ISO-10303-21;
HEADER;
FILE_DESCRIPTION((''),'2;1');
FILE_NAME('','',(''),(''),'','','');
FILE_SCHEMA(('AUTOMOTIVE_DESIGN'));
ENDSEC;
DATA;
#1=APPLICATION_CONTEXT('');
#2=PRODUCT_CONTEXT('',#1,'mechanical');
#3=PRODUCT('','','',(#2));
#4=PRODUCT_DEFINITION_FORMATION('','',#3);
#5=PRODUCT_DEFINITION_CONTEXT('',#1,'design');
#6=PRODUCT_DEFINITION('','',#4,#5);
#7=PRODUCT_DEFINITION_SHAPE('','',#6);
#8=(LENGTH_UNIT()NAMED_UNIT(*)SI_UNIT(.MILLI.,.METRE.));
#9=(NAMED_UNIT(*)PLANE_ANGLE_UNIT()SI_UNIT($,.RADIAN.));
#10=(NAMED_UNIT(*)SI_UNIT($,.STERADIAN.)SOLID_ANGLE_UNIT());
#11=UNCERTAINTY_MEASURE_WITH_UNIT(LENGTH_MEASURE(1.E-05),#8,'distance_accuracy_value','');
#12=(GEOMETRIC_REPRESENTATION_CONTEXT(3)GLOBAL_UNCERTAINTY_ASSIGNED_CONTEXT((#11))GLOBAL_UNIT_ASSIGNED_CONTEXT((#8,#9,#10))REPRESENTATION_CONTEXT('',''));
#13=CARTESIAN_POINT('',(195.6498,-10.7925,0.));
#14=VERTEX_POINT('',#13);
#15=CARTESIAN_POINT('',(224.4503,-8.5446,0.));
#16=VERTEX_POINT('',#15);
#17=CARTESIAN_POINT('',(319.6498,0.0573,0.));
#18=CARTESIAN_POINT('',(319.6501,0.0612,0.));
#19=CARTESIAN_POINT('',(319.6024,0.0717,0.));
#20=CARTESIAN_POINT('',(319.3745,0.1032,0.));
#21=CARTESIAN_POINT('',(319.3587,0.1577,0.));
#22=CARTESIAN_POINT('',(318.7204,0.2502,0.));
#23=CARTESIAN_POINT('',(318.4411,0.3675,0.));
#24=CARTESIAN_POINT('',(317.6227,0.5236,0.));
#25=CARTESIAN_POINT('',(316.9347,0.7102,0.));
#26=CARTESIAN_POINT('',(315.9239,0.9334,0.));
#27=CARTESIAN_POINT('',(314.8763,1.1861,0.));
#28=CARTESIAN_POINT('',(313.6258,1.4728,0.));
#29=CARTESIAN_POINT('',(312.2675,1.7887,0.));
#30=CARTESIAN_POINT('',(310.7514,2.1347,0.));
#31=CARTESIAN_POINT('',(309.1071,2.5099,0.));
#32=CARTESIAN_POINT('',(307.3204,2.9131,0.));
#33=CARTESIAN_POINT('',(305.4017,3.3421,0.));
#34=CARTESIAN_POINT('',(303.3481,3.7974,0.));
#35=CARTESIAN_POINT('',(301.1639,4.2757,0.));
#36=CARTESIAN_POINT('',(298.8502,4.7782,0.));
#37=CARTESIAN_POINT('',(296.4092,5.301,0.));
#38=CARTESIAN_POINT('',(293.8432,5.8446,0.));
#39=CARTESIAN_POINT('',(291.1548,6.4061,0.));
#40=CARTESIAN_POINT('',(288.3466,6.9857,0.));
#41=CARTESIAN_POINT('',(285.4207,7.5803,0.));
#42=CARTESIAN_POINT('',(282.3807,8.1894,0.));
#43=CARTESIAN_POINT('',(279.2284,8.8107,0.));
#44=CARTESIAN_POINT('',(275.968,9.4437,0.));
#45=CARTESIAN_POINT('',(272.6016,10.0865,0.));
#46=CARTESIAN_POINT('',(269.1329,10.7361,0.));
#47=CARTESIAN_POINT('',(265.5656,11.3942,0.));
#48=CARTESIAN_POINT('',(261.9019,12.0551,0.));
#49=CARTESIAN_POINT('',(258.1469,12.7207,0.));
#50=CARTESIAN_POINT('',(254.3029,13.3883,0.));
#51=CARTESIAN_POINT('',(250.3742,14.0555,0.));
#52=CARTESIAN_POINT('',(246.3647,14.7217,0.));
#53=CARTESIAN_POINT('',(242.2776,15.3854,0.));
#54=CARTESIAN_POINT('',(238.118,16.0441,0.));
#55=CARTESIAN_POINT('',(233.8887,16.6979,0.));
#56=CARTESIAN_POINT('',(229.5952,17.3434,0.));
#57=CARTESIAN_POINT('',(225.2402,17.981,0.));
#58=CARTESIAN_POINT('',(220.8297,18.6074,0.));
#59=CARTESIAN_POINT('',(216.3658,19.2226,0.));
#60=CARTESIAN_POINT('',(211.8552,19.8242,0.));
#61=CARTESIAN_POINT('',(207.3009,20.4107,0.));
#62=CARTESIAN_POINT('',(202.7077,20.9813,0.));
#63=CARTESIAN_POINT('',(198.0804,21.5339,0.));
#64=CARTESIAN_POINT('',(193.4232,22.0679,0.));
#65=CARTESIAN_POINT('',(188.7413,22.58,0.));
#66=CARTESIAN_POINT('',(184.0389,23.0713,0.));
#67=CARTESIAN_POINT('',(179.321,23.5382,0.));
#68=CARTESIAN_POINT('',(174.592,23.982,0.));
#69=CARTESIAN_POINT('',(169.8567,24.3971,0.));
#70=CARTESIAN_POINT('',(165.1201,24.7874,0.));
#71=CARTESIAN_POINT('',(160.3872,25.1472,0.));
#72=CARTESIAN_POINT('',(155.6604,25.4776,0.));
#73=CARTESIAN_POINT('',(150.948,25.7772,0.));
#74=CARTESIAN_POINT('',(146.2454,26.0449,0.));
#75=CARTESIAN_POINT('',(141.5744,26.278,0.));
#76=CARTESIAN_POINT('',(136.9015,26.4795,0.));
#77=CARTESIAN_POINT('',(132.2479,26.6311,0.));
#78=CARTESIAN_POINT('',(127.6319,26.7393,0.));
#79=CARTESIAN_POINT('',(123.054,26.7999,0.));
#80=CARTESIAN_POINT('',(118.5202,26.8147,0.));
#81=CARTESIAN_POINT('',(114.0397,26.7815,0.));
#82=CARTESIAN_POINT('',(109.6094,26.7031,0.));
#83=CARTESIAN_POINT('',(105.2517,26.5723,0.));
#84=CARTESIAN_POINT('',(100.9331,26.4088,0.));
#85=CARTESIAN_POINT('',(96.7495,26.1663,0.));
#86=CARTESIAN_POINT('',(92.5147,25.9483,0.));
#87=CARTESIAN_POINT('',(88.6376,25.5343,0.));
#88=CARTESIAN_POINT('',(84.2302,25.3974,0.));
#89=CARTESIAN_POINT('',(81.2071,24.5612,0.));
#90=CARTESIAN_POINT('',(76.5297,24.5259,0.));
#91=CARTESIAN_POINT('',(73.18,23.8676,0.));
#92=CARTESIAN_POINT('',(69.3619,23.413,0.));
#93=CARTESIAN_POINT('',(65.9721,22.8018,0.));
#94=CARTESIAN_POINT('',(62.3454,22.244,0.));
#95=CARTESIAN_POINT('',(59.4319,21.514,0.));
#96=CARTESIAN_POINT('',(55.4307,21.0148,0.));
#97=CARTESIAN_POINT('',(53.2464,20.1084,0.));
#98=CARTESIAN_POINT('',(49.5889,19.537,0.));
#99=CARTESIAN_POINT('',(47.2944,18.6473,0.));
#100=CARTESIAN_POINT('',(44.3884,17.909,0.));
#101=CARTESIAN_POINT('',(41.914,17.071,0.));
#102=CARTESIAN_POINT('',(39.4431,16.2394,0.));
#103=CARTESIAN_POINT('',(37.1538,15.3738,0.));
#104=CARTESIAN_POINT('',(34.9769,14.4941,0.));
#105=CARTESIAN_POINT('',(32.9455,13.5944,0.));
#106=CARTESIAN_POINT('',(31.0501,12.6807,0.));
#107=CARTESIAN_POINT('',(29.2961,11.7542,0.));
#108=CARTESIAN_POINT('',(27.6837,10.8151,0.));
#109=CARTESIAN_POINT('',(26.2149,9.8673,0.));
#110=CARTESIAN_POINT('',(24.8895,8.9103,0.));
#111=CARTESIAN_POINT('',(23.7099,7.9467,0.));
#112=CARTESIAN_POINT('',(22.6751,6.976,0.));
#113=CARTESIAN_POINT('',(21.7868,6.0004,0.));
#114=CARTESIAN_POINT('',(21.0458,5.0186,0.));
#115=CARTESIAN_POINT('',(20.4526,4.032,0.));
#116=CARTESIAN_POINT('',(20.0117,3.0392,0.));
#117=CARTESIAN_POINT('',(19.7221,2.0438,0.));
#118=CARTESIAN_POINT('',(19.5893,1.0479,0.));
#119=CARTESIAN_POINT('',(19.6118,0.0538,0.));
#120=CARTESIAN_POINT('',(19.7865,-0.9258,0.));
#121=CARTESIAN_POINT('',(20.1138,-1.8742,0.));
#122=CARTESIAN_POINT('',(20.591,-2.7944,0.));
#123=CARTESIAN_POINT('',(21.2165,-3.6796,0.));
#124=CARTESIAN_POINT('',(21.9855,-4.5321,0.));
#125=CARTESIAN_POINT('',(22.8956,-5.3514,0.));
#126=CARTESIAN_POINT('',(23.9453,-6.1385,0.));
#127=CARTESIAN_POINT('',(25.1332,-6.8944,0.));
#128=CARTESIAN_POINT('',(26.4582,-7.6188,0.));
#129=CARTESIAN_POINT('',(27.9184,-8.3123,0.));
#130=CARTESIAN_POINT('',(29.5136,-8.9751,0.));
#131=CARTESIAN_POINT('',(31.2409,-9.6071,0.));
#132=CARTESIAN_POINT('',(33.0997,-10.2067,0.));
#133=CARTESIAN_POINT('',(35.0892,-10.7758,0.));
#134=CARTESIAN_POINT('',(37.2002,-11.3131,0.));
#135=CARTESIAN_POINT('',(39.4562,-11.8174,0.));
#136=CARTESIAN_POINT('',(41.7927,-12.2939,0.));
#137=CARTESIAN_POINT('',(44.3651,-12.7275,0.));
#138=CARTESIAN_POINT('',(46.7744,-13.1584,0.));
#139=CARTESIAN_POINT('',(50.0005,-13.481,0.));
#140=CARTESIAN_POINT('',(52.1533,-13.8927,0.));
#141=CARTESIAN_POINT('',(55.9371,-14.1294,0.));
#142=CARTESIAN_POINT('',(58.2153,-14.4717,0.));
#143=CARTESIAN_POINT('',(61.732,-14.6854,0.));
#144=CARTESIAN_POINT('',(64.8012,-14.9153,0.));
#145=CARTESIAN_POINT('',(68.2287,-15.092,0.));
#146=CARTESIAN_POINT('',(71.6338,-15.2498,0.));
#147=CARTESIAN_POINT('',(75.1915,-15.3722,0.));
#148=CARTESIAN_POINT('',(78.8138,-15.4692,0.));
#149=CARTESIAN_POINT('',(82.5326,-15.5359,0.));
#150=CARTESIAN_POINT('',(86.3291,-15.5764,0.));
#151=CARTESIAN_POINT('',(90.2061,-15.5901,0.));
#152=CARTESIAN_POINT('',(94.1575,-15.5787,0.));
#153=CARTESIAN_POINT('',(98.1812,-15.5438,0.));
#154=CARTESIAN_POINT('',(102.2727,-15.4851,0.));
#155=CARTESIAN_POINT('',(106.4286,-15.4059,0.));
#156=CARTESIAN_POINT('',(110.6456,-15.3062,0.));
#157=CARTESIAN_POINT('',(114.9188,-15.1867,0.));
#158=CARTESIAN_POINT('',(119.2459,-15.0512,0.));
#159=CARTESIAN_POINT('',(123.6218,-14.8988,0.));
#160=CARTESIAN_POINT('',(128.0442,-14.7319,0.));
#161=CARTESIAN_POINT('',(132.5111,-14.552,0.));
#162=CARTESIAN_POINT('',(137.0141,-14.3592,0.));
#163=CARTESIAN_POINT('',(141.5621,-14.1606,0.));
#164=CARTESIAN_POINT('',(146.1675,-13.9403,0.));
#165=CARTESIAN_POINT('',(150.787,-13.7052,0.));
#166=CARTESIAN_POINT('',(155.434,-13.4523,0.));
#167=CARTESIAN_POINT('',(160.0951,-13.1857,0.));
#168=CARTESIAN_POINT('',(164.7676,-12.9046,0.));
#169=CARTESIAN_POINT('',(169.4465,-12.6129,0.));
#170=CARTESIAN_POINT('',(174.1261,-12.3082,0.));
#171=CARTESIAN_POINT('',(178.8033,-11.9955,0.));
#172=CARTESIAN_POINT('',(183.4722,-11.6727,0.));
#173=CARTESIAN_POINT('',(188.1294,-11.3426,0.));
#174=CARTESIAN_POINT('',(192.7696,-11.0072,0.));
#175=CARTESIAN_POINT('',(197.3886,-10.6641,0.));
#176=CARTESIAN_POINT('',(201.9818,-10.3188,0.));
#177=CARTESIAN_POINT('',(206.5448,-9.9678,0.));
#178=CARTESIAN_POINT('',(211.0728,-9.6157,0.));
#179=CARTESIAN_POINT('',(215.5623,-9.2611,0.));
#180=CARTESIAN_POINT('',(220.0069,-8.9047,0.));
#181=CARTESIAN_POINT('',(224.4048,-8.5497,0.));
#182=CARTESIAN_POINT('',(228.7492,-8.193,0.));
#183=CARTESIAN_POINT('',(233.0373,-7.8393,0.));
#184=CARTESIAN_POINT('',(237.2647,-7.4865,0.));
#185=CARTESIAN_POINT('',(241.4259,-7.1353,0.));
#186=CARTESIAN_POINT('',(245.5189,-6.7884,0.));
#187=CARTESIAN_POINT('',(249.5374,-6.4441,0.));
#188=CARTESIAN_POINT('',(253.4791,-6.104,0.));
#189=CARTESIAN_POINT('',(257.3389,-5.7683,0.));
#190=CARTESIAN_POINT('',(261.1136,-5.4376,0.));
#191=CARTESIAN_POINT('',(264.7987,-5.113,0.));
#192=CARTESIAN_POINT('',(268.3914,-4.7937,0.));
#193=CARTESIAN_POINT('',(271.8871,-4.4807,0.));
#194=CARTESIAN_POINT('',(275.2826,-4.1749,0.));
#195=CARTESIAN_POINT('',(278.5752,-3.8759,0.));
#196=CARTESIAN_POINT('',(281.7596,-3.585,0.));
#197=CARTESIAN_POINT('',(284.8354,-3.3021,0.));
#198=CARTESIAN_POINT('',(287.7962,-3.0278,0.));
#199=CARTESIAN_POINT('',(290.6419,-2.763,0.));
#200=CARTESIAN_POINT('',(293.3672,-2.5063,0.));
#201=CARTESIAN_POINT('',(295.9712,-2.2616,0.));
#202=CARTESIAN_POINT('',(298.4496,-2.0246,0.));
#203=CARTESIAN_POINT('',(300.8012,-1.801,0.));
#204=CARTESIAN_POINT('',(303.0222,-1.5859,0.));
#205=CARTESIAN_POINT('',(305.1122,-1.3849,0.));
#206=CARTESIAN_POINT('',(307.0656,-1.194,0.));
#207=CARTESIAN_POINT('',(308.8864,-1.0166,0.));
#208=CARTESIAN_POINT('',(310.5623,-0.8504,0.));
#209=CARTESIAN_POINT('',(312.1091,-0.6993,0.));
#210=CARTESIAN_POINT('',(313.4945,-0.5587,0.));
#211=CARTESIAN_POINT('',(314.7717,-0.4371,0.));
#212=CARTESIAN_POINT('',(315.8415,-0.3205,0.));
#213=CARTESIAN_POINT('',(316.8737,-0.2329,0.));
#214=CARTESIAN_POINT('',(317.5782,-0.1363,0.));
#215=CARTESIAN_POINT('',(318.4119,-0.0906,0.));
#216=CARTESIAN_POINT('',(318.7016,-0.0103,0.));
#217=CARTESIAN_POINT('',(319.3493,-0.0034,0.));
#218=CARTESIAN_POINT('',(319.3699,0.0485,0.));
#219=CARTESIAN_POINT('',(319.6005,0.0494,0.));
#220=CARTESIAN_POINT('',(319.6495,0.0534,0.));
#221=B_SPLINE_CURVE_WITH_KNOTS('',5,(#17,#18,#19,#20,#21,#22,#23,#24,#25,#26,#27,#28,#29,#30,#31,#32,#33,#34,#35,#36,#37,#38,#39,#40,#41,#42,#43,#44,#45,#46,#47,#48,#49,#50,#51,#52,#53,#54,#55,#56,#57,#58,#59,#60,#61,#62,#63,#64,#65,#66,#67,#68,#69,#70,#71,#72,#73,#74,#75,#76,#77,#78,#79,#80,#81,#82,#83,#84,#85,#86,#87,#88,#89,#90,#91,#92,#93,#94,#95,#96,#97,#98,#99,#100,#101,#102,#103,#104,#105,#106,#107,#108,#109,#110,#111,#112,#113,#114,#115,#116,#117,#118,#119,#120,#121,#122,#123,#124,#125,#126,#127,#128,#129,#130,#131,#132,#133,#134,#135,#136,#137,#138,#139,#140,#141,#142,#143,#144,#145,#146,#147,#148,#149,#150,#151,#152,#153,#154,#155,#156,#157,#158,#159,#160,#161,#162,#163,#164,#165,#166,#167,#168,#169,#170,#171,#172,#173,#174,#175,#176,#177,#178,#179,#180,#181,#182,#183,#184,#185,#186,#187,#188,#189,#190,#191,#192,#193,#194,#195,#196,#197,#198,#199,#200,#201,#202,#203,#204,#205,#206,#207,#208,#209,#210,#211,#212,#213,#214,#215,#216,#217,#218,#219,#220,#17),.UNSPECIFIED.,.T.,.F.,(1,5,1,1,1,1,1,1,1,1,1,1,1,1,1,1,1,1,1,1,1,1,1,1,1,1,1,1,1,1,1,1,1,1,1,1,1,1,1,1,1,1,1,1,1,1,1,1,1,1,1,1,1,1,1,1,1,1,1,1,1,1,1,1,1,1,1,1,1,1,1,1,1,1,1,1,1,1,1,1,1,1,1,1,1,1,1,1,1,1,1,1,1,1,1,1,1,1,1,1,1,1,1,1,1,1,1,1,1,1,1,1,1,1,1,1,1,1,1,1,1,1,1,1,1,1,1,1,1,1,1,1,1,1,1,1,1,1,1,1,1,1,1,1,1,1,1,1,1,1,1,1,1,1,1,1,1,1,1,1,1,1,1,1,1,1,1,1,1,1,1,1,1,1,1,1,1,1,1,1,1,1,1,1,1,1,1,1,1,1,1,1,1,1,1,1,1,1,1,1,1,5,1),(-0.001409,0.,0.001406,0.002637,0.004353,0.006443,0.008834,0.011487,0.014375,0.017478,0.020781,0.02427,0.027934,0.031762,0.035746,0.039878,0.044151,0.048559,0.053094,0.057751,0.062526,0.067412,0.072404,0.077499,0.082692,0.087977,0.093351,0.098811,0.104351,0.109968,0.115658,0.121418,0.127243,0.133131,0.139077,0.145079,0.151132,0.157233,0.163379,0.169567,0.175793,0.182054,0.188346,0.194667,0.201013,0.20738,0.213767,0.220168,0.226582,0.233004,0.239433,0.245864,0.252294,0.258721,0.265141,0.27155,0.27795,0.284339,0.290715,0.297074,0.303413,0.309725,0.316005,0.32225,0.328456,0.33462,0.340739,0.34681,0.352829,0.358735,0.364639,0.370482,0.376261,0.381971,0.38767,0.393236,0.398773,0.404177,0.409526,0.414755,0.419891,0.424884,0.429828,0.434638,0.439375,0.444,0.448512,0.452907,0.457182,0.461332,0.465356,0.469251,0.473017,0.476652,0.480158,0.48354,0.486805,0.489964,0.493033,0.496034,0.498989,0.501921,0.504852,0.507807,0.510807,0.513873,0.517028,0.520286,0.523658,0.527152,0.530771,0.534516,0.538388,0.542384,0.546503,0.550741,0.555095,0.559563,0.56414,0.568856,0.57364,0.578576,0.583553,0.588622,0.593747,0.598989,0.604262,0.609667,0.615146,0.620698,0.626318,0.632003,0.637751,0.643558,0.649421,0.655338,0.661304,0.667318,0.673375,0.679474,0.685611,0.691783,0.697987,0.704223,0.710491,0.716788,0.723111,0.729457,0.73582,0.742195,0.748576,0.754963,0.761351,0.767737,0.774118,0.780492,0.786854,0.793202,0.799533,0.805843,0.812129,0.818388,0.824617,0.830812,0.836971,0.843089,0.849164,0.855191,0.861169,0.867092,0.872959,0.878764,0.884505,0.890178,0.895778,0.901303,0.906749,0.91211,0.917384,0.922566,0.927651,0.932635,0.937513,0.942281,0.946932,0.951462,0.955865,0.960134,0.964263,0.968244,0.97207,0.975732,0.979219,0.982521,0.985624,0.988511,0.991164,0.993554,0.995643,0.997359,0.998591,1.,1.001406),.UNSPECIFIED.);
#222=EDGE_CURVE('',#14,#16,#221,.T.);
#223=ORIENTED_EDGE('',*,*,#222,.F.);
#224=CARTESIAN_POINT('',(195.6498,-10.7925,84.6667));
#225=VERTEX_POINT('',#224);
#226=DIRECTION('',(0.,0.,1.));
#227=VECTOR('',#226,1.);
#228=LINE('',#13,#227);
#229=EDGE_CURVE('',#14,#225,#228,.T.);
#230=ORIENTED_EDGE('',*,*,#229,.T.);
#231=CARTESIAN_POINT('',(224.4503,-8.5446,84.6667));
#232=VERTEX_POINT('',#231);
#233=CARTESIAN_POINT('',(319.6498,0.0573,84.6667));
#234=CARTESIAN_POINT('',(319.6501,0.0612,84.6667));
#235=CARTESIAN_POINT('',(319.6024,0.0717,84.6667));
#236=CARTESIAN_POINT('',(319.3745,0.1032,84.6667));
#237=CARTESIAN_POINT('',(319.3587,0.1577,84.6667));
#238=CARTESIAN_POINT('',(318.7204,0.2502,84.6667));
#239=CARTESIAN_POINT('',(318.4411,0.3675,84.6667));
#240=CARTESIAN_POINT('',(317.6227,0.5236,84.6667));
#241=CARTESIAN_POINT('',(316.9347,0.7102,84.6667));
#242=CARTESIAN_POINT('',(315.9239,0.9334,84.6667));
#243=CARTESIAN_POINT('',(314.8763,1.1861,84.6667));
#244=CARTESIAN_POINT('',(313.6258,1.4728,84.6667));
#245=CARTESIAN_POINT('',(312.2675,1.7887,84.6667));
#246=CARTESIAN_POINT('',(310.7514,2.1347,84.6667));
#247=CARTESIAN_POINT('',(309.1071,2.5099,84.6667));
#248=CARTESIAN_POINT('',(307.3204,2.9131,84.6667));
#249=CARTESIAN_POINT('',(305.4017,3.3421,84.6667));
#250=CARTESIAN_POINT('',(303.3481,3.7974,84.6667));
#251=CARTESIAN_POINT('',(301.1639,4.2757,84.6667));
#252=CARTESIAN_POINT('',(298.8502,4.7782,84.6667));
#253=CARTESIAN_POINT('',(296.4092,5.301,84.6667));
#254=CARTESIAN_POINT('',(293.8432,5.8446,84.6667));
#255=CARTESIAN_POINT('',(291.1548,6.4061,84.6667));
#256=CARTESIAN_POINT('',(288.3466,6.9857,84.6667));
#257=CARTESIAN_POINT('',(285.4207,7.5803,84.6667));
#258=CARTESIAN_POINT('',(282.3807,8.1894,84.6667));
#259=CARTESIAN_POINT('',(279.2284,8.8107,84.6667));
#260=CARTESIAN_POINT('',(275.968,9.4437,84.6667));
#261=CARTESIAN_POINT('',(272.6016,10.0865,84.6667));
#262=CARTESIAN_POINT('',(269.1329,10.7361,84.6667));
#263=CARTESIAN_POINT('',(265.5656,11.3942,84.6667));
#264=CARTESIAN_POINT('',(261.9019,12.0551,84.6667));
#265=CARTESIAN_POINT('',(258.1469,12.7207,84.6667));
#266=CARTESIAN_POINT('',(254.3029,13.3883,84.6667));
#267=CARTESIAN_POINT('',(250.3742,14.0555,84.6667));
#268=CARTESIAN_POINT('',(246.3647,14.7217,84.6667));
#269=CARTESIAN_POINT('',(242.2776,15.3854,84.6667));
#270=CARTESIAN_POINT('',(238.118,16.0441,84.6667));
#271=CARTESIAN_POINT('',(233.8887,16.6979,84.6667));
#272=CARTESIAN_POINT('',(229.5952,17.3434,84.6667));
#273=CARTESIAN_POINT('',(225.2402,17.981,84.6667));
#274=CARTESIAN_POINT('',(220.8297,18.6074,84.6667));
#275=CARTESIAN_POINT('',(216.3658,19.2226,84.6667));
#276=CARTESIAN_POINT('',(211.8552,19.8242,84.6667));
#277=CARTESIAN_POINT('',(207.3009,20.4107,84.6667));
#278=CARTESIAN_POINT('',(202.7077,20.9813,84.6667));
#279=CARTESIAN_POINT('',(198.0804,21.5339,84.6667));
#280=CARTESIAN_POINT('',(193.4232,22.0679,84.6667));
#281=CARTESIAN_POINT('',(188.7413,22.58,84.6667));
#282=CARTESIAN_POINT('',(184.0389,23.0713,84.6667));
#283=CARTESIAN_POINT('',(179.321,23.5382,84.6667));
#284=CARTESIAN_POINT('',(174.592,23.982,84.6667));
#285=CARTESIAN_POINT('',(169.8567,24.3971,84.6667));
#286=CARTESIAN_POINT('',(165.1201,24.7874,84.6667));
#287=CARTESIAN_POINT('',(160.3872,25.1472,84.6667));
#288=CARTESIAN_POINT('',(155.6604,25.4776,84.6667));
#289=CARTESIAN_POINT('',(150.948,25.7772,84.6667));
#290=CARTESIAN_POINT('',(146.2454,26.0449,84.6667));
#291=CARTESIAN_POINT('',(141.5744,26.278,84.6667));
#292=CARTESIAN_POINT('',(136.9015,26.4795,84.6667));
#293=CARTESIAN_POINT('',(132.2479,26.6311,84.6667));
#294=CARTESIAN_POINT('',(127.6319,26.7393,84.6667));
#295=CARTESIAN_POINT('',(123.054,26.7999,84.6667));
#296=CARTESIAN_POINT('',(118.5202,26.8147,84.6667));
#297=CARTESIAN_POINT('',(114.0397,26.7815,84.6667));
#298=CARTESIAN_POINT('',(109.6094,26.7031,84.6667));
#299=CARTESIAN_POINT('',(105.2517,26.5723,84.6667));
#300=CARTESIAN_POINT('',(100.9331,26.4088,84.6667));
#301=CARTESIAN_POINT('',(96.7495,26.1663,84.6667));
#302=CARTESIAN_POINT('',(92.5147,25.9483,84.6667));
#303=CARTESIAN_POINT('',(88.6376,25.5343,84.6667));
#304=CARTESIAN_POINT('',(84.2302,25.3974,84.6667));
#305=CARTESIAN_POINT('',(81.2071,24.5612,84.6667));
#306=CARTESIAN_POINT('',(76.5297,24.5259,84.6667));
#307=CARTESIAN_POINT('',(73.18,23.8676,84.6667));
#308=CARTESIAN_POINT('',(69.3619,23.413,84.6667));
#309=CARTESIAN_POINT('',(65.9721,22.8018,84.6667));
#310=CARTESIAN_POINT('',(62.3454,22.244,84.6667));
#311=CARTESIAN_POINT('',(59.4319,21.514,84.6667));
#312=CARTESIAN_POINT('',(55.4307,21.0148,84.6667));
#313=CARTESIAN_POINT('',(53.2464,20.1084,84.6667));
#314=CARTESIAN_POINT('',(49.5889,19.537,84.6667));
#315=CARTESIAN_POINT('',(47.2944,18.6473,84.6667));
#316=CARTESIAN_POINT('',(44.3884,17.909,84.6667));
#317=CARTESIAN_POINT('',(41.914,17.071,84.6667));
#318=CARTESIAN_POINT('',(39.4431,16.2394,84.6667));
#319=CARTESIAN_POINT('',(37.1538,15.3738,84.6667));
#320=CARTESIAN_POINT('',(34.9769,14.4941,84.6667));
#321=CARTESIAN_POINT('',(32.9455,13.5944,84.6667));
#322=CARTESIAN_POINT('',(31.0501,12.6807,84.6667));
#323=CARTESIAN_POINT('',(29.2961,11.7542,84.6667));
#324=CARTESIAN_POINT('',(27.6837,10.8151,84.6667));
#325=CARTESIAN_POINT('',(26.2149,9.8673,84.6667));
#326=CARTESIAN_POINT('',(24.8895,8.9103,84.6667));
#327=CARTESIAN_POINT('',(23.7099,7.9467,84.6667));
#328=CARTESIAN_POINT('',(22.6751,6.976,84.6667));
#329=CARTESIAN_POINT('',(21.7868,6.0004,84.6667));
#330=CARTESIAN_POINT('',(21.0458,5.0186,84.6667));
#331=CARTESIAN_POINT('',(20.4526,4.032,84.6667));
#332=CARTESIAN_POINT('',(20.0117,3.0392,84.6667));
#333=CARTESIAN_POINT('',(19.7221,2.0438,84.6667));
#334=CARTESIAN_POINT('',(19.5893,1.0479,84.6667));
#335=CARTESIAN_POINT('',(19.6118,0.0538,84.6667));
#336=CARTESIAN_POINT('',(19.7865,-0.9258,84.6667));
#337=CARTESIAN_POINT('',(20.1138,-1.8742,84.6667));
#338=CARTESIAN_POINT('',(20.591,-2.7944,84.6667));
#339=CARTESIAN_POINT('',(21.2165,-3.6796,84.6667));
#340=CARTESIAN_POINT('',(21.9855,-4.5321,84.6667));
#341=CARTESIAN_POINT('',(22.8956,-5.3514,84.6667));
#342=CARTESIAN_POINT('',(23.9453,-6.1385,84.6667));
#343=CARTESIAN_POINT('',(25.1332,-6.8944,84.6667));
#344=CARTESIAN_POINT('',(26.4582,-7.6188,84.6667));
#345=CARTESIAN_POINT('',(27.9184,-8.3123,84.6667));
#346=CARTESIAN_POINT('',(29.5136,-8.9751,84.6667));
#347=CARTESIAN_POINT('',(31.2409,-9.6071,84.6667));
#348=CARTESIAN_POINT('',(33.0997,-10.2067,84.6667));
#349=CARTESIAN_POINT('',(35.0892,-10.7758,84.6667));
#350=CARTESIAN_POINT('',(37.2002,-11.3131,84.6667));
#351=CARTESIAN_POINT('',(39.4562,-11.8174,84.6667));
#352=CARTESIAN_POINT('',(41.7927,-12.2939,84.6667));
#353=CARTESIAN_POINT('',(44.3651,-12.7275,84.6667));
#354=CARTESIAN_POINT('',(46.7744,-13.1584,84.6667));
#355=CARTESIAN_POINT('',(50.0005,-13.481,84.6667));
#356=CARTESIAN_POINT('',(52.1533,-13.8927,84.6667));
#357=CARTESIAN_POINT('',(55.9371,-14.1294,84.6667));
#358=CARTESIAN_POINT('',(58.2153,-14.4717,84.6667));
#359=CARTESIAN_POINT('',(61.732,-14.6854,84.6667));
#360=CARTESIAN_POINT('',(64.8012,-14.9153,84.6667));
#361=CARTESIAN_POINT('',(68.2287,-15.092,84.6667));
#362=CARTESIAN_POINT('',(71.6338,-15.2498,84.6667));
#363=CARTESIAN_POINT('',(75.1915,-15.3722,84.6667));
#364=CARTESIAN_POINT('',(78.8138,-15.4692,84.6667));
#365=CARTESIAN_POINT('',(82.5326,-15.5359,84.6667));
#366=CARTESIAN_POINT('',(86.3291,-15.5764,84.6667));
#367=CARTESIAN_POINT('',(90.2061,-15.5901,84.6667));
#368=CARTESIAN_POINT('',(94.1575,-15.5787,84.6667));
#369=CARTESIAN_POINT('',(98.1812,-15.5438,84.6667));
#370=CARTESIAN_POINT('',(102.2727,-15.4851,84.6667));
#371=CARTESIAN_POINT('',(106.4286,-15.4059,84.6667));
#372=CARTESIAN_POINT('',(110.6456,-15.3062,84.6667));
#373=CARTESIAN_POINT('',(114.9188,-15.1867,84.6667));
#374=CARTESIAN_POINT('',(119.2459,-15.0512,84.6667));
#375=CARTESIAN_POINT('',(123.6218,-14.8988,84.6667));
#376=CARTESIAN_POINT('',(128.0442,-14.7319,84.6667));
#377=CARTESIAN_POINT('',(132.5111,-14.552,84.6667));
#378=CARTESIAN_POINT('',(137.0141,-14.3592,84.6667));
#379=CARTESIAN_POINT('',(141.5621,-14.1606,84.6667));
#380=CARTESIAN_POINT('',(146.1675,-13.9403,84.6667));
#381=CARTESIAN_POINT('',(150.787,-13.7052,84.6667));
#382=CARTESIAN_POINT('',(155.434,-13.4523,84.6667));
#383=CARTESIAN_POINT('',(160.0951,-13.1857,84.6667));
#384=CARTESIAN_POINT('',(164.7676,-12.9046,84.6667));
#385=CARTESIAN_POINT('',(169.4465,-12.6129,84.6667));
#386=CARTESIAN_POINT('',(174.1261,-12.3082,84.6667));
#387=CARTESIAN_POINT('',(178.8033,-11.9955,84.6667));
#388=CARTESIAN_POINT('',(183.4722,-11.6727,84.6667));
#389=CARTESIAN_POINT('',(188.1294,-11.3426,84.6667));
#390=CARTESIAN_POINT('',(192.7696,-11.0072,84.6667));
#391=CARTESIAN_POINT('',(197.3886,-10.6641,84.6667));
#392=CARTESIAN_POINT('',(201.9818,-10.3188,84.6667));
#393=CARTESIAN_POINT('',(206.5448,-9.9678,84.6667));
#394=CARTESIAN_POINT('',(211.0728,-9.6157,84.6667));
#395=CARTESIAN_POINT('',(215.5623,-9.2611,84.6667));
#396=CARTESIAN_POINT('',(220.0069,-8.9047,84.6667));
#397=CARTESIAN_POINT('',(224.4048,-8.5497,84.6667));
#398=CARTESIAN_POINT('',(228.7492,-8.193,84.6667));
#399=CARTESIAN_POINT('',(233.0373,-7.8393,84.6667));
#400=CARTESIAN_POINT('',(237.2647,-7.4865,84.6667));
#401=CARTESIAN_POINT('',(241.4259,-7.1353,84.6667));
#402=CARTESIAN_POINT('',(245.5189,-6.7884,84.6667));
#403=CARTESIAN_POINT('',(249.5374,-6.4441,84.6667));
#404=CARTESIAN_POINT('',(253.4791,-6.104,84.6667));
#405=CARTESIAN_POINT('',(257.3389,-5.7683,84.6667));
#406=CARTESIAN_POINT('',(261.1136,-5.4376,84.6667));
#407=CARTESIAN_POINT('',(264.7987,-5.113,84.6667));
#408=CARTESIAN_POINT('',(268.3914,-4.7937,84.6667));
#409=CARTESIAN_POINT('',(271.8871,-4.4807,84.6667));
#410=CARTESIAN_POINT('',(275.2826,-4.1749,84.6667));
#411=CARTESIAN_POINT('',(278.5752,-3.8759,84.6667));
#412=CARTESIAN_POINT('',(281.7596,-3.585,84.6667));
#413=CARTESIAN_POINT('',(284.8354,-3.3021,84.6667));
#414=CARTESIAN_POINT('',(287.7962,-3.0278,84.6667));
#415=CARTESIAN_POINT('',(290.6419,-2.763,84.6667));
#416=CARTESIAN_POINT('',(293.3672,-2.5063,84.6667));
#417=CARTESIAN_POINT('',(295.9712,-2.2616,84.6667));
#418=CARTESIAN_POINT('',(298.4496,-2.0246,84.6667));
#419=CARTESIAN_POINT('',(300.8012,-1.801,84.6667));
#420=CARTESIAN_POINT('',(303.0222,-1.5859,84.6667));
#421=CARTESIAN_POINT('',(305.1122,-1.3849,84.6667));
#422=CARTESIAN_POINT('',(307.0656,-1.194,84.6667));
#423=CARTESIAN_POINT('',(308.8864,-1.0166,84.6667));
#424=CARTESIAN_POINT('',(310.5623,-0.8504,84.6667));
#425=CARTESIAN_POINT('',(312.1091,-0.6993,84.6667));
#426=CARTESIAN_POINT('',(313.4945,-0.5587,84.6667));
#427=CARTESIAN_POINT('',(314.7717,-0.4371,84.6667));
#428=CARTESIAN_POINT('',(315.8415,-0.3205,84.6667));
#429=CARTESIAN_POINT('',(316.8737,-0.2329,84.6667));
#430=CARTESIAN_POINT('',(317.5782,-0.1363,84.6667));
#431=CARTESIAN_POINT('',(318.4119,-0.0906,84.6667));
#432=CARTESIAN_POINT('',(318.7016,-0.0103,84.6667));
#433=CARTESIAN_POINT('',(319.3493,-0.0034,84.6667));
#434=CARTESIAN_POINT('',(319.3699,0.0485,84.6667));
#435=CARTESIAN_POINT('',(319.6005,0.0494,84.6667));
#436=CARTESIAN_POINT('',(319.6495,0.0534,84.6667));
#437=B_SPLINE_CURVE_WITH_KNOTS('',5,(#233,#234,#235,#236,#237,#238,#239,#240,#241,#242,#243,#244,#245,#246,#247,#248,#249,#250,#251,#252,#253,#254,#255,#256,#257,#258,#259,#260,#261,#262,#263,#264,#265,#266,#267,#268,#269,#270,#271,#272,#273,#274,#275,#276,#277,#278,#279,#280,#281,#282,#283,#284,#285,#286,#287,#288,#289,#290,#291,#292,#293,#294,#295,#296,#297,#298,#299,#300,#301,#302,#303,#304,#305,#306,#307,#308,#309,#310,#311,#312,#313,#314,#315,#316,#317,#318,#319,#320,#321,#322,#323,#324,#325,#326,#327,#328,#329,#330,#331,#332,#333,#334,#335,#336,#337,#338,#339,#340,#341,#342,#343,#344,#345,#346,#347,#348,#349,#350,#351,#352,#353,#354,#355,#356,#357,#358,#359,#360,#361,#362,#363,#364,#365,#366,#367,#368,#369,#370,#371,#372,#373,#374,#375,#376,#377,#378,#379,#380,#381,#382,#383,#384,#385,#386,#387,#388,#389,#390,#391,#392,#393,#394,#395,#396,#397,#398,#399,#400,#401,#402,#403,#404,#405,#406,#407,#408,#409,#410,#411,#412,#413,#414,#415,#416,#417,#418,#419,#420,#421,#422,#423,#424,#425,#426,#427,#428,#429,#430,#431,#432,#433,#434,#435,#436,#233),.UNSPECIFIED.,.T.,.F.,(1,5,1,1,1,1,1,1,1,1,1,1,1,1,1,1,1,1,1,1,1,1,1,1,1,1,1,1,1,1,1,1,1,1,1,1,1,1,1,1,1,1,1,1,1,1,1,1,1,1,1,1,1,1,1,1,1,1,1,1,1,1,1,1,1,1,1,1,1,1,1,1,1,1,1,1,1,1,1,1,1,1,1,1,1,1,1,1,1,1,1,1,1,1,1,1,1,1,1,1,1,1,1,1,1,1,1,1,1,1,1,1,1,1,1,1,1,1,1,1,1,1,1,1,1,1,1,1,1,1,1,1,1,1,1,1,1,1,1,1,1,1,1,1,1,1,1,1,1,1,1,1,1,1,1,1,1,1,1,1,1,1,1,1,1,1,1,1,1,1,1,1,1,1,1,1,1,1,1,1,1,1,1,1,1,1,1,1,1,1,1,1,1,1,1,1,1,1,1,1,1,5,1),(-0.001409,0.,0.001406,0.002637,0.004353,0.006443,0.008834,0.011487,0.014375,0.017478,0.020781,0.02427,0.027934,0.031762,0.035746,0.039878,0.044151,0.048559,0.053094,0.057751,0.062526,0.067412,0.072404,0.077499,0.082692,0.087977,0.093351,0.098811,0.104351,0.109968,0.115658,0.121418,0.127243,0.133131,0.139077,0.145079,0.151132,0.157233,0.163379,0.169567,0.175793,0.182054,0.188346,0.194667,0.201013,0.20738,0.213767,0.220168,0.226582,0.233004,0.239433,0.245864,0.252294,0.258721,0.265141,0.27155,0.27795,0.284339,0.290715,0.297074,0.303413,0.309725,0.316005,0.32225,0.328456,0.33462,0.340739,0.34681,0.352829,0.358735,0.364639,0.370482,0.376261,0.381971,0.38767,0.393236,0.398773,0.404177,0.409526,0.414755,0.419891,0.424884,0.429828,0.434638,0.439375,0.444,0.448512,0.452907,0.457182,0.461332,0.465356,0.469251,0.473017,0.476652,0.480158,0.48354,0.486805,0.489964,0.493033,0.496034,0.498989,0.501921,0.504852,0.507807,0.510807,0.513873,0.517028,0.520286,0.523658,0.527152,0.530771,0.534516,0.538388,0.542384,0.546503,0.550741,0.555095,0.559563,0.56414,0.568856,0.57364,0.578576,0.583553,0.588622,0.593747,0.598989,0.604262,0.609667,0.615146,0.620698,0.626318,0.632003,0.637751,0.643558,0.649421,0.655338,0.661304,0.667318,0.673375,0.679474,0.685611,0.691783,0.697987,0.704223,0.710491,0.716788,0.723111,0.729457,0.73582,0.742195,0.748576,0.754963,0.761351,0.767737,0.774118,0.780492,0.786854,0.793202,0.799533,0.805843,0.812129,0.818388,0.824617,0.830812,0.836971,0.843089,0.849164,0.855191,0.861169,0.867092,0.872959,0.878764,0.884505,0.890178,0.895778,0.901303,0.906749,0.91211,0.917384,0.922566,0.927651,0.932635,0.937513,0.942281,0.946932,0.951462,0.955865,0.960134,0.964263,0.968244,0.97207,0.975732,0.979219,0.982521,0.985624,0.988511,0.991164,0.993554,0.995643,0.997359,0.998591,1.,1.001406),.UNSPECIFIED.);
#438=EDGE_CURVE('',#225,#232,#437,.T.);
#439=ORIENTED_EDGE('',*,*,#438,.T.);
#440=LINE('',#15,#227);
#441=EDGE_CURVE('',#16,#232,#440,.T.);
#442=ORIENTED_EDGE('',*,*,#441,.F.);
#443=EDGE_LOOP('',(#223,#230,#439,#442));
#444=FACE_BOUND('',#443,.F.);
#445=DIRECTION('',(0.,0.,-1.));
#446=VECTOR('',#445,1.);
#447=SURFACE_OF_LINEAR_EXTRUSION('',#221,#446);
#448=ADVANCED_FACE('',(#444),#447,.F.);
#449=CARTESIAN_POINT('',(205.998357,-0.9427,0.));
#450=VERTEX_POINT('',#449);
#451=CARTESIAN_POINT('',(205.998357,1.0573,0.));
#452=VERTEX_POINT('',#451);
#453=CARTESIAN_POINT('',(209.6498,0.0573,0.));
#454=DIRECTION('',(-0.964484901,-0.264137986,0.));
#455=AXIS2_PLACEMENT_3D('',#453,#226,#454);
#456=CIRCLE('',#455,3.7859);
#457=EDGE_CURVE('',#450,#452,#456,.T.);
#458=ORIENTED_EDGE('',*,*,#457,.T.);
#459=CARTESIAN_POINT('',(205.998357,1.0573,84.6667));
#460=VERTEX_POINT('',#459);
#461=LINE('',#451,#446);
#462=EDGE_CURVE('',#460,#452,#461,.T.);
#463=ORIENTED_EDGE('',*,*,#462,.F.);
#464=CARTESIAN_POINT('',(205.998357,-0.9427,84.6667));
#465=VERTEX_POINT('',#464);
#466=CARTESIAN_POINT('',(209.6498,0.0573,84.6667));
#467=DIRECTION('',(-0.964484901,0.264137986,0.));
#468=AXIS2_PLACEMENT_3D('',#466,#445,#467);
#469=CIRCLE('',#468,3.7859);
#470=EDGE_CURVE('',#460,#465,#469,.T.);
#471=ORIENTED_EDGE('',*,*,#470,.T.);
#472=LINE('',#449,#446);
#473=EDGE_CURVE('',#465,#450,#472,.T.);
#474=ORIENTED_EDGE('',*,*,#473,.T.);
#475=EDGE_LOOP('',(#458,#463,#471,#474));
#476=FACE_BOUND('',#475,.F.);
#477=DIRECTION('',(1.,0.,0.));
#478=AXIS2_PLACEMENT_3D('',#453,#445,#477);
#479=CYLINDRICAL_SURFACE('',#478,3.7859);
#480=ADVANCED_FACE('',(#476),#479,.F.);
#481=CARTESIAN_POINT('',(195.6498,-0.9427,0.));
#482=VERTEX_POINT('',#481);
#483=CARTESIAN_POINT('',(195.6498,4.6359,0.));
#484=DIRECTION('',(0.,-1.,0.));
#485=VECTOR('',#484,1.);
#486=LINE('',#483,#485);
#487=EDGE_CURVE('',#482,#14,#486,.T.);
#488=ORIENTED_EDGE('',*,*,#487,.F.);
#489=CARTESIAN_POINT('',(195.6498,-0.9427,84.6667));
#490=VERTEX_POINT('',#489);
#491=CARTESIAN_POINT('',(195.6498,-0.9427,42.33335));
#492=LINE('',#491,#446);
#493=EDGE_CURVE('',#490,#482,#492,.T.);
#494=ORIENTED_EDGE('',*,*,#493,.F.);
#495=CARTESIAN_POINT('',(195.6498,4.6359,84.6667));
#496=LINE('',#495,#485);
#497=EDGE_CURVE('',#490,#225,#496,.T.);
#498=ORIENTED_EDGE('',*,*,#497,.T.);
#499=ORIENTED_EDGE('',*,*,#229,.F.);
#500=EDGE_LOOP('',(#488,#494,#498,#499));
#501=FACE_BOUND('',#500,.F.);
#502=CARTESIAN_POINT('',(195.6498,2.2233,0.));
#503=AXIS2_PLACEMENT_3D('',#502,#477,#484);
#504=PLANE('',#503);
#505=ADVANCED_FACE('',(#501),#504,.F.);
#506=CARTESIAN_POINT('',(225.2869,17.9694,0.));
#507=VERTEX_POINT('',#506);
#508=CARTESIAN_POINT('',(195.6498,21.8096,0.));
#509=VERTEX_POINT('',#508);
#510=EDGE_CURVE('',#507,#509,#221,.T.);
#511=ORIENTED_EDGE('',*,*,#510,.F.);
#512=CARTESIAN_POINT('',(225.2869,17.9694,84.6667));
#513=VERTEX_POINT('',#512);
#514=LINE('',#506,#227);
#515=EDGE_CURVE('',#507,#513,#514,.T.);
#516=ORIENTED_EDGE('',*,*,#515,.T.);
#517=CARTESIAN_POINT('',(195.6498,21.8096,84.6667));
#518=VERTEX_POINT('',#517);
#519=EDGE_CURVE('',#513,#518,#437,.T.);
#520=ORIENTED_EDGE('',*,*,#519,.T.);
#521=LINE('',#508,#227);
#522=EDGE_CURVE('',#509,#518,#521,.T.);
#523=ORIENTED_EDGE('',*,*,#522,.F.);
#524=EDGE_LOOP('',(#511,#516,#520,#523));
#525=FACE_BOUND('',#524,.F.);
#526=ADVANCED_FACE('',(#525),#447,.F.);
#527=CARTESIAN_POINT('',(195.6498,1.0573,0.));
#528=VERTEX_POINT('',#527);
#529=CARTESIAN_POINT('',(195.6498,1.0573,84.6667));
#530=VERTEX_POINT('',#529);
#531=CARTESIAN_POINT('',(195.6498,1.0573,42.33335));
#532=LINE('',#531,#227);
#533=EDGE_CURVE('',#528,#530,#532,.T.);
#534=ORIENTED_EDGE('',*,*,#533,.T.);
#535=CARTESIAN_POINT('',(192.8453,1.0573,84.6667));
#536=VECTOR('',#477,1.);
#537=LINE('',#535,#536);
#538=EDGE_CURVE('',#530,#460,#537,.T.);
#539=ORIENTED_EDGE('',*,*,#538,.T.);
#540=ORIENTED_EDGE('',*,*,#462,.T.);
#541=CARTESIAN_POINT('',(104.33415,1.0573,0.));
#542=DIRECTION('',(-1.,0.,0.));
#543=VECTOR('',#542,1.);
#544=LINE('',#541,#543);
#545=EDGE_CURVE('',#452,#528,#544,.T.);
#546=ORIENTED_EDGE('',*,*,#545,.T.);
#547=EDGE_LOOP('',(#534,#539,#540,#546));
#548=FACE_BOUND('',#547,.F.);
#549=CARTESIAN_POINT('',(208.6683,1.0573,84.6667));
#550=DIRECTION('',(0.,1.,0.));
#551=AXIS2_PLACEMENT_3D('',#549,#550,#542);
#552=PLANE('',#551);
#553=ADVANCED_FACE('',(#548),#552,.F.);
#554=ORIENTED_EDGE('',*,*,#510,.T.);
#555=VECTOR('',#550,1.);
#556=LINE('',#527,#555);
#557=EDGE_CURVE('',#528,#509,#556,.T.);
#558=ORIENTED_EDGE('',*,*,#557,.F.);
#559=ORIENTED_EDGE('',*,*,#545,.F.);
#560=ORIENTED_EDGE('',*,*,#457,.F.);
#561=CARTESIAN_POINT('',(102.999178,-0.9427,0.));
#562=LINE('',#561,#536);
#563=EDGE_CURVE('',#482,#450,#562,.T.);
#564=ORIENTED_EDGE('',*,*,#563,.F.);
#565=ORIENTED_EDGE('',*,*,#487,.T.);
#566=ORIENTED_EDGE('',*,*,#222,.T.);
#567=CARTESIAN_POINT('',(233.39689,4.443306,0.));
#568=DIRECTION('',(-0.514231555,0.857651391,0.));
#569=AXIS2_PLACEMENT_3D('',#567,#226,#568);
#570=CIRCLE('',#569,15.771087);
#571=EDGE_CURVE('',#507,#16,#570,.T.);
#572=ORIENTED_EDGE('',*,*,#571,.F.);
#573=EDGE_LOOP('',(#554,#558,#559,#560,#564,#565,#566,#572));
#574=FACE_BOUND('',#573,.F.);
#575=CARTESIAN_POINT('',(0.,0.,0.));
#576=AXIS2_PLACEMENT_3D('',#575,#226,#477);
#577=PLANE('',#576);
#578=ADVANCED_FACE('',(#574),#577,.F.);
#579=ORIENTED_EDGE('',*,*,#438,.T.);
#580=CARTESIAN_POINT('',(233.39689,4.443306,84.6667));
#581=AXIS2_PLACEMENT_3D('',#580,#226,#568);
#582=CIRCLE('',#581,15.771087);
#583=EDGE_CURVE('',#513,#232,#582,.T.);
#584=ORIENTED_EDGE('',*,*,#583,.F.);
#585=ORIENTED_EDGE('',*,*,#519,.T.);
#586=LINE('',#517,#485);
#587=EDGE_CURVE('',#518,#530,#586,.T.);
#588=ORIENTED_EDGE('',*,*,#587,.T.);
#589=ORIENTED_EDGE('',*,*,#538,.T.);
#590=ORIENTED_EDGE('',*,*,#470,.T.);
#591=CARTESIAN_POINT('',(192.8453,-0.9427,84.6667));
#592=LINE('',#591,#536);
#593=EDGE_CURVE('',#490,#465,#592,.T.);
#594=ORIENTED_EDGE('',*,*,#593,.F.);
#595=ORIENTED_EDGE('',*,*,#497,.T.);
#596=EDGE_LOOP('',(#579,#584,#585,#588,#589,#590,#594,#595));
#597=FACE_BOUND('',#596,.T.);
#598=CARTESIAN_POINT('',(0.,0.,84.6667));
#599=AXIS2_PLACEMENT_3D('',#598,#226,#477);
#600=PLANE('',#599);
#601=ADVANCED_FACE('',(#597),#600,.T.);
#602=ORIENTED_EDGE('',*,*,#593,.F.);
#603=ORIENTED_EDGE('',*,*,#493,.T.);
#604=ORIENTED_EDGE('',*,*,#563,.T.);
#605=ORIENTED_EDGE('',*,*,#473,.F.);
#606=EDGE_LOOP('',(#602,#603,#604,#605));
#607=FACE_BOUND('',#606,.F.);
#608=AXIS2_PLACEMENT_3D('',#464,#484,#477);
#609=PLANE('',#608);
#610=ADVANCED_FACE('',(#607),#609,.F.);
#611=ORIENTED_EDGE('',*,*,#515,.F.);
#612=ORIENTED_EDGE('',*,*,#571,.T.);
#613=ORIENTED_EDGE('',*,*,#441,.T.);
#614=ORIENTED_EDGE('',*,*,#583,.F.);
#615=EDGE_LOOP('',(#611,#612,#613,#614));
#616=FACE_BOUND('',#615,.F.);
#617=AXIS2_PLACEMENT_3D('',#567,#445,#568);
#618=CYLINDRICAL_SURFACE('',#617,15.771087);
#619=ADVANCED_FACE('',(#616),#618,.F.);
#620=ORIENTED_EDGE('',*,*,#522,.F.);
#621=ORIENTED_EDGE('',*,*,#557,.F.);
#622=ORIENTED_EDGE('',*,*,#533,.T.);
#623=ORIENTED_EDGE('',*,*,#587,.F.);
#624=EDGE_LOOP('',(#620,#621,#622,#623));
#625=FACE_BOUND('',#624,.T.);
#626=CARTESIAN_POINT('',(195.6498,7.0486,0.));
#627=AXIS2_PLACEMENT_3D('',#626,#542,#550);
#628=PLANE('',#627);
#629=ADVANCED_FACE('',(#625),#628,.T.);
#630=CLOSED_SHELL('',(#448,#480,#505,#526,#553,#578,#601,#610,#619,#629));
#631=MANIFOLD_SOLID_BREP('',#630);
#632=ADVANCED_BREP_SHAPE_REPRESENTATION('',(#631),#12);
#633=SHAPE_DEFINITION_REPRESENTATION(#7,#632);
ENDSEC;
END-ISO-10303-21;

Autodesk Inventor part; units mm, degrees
ref_plane "YZ Plane" through (0, 0, 0) normal (1, 0, 0) x (0, 1, 0)
ref_plane "XZ Plane" through (0, 0, 0) normal (0, 1, 0) x (-1, 0, 0)
ref_plane "XY Plane" through (0, 0, 0) normal (0, 0, 1) x (1, 0, 0)
sketch "Sketch2" plane through (0, 0, 0) normal (0, 0, 1) x (1, 0, 0)
  spline S0 degree 5 poles (319.6498, 0.0573) (319.6501, 0.0612) (319.6024, 0.0717) (319.3745, 0.1032) (319.3587, 0.1577) (318.7204, 0.2502) (318.4411, 0.3675) (317.6227, 0.5236) (316.9347, 0.7102) (315.9239, 0.9334) (314.8763, 1.1861) (313.6258, 1.4728) (312.2675, 1.7887) (310.7514, 2.1347) (309.1071, 2.5099) (307.3204, 2.9131) (305.4017, 3.3421) (303.3481, 3.7974) (301.1639, 4.2757) (298.8502, 4.7782) (296.4092, 5.301) (293.8432, 5.8446) (291.1548, 6.4061) (288.3466, 6.9857) (285.4207, 7.5803) (282.3807, 8.1894) (279.2284, 8.8107) (275.968, 9.4437) (272.6016, 10.0865) (269.1329, 10.7361) (265.5656, 11.3942) (261.9019, 12.0551) (258.1469, 12.7207) (254.3029, 13.3883) (250.3742, 14.0555) (246.3647, 14.7217) (242.2776, 15.3854) (238.118, 16.0441) (233.8887, 16.6979) (229.5952, 17.3434) (225.2402, 17.981) (220.8297, 18.6074) (216.3658, 19.2226) (211.8552, 19.8242) (207.3009, 20.4107) (202.7077, 20.9813) (198.0804, 21.5339) (193.4232, 22.0679) (188.7413, 22.58) (184.0389, 23.0713) (179.321, 23.5382) (174.592, 23.982) (169.8567, 24.3971) (165.1201, 24.7874) (160.3872, 25.1472) (155.6604, 25.4776) (150.948, 25.7772) (146.2454, 26.0449) (141.5744, 26.278) (136.9015, 26.4795) (132.2479, 26.6311) (127.6319, 26.7393) (123.054, 26.7999) (118.5202, 26.8147) (114.0397, 26.7815) (109.6094, 26.7031) (105.2517, 26.5723) (100.9331, 26.4088) (96.7495, 26.1663) (92.5147, 25.9483) (88.6376, 25.5343) (84.2302, 25.3974) (81.2071, 24.5612) (76.5297, 24.5259) (73.18, 23.8676) (69.3619, 23.413) (65.9721, 22.8018) (62.3454, 22.244) (59.4319, 21.514) (55.4307, 21.0148) (53.2464, 20.1084) (49.5889, 19.537) (47.2944, 18.6473) (44.3884, 17.909) (41.914, 17.071) (39.4431, 16.2394) (37.1538, 15.3738) (34.9769, 14.4941) (32.9455, 13.5944) (31.0501, 12.6807) (29.2961, 11.7542) (27.6837, 10.8151) (26.2149, 9.8673) (24.8895, 8.9103) (23.7099, 7.9467) (22.6751, 6.976) (21.7868, 6.0004) (21.0458, 5.0186) (20.4526, 4.032) (20.0117, 3.0392) (19.7221, 2.0438) (19.5893, 1.0479) (19.6118, 0.0538) (19.7865, -0.9258) (20.1138, -1.8742) (20.591, -2.7944) (21.2165, -3.6796) (21.9855, -4.5321) (22.8956, -5.3514) (23.9453, -6.1385) (25.1332, -6.8944) (26.4582, -7.6188) (27.9184, -8.3123) (29.5136, -8.9751) (31.2409, -9.6071) (33.0997, -10.2067) (35.0892, -10.7758) (37.2002, -11.3131) (39.4562, -11.8174) (41.7927, -12.2939) (44.3651, -12.7275) (46.7744, -13.1584) (50.0005, -13.481) (52.1533, -13.8927) (55.9371, -14.1294) (58.2153, -14.4717) (61.732, -14.6854) (64.8012, -14.9153) (68.2287, -15.092) (71.6338, -15.2498) (75.1915, -15.3722) (78.8138, -15.4692) (82.5326, -15.5359) (86.3291, -15.5764) (90.2061, -15.5901) (94.1575, -15.5787) (98.1812, -15.5438) (102.2727, -15.4851) (106.4286, -15.4059) (110.6456, -15.3062) (114.9188, -15.1867) (119.2459, -15.0512) (123.6218, -14.8988) (128.0442, -14.7319) (132.5111, -14.552) (137.0141, -14.3592) (141.5621, -14.1606) (146.1675, -13.9403) (150.787, -13.7052) (155.434, -13.4523) (160.0951, -13.1857) (164.7676, -12.9046) (169.4465, -12.6129) (174.1261, -12.3082) (178.8033, -11.9955) (183.4722, -11.6727) (188.1294, -11.3426) (192.7696, -11.0072) (197.3886, -10.6641) (201.9818, -10.3188) (206.5448, -9.9678) (211.0728, -9.6157) (215.5623, -9.2611) (220.0069, -8.9047) (224.4048, -8.5497) (228.7492, -8.193) (233.0373, -7.8393) (237.2647, -7.4865) (241.4259, -7.1353) (245.5189, -6.7884) (249.5374, -6.4441) (253.4791, -6.104) (257.3389, -5.7683) (261.1136, -5.4376) (264.7987, -5.113) (268.3914, -4.7937) (271.8871, -4.4807) (275.2826, -4.1749) (278.5752, -3.8759) (281.7596, -3.585) (284.8354, -3.3021) (287.7962, -3.0278) (290.6419, -2.763) (293.3672, -2.5063) (295.9712, -2.2616) (298.4496, -2.0246) (300.8012, -1.801) (303.0222, -1.5859) (305.1122, -1.3849) (307.0656, -1.194) (308.8864, -1.0166) (310.5623, -0.8504) (312.1091, -0.6993) (313.4945, -0.5587) (314.7717, -0.4371) (315.8415, -0.3205) (316.8737, -0.2329) (317.5782, -0.1363) (318.4119, -0.0906) (318.7016, -0.0103) (319.3493, -0.0034) (319.3699, 0.0485) (319.6005, 0.0494) (319.6495, 0.0534) (319.6498, 0.0573) knots 0 0 0 0 0 0 0.001406 0.002637 0.004353 0.006443 0.008834 0.011487 0.014375 0.017478 0.020781 0.02427 0.027934 0.031762 0.035746 0.039878 0.044151 0.048559 0.053094 0.057751 0.062526 0.067412 0.072404 0.077499 0.082692 0.087977 0.093351 0.098811 0.104351 0.109968 0.115658 0.121418 0.127243 0.133131 0.139077 0.145079 0.151132 0.157233 0.163379 0.169567 0.175793 0.182054 0.188346 0.194667 0.201013 0.20738 0.213767 0.220168 0.226582 0.233004 0.239433 0.245864 0.252294 0.258721 0.265141 0.27155 0.27795 0.284339 0.290715 0.297074 0.303413 0.309725 0.316005 0.32225 0.328456 0.33462 0.340739 0.34681 0.352829 0.358735 0.364639 0.370482 0.376261 0.381971 0.38767 0.393236 0.398773 0.404177 0.409526 0.414755 0.419891 0.424884 0.429828 0.434638 0.439375 0.444 0.448512 0.452907 0.457182 0.461332 0.465356 0.469251 0.473017 0.476652 0.480158 0.48354 0.486805 0.489964 0.493033 0.496034 0.498989 0.501921 0.504852 0.507807 0.510807 0.513873 0.517028 0.520286 0.523658 0.527152 0.530771 0.534516 0.538388 0.542384 0.546503 0.550741 0.555095 0.559563 0.56414 0.568856 0.57364 0.578576 0.583553 0.588622 0.593747 0.598989 0.604262 0.609667 0.615146 0.620698 0.626318 0.632003 0.637751 0.643558 0.649421 0.655338 0.661304 0.667318 0.673375 0.679474 0.685611 0.691783 0.697987 0.704223 0.710491 0.716788 0.723111 0.729457 0.73582 0.742195 0.748576 0.754963 0.761351 0.767737 0.774118 0.780492 0.786854 0.793202 0.799533 0.805843 0.812129 0.818388 0.824617 0.830812 0.836971 0.843089 0.849164 0.855191 0.861169 0.867092 0.872959 0.878764 0.884505 0.890178 0.895778 0.901303 0.906749 0.91211 0.917384 0.922566 0.927651 0.932635 0.937513 0.942281 0.946932 0.951462 0.955865 0.960134 0.964263 0.968244 0.97207 0.975732 0.979219 0.982521 0.985624 0.988511 0.991164 0.993554 0.995643 0.997359 0.998591 1 1 1 1 1 1
  circle A0 centre (79.5135, 4.6359) radius 11.959
  line L0 (79.5135, 4.6359) -> (79.5135, 24.6083) construction
  circle A1 centre (209.6498, 0.0573) radius 3.7859
  line L1 (79.5135, 4.6359) -> (209.6498, 4.6359) construction
  line L2 (319.6498, 0.0573) -> (219.6498, 0.0573) construction
  line L3 (219.6499, 18.7671) -> (219.6499, -8.9327) construction
  line L4 (28.0055, 4.5054) -> (28.0055, -2.4946)
  line L5 (19.627, 1.0326) -> (319.6498, 0.0573) construction
  line L6 (49.7105, 14.4213) -> (55.6079, 14.4213)
  line L7 (49.7104, -8.4915) -> (55.6078, -8.4915)
  line L8 (28.0055, 4.5054) -> (49.7105, 14.4213)
  line L9 (28.0055, -2.4946) -> (49.7104, -8.4915)
  line L10 (55.6079, 14.4213) -> (55.6079, 20.8726)
  line L11 (55.6078, -8.4915) -> (55.6078, -14.1513)
  line L12 (108.6496, 16.398) -> (108.6496, -7.1261)
  line L13 (110.8735, -9.1136) -> (193.8736, 0.2359)
  line L14 (195.6498, 2.2233) -> (195.6498, 7.0486)
  line L15 (193.8736, 9.036) -> (110.8735, 18.3854)
  arc A2 (110.8735, 18.3854) -> (108.6496, 16.398) centre (110.6496, 16.398) ccw
  arc A3 (108.6496, -7.1261) -> (110.8735, -9.1136) centre (110.6496, -7.1261) ccw
  arc A4 (193.8736, 0.2359) -> (195.6498, 2.2233) centre (193.6498, 2.2233) ccw
  arc A5 (195.6498, 7.0486) -> (193.8736, 9.036) centre (193.6498, 7.0486) ccw
  arc A6 (225.2869, 17.9694) -> (224.4503, -8.5446) centre (233.3969, 4.4433) ccw
  line L16 (195.6498, 4.6359) -> (195.6498, -10.7925)
  line L17 (195.6498, 4.6359) -> (195.6498, 21.8096)
  point P0 (0, 0)
  point P1 (319.3573, 0.1272)
  point P2 (318.9918, 0.2142)
  point P3 (318.4802, 0.3354)
  point P4 (317.8238, 0.4911)
  point P5 (317.0222, 0.6801)
  point P6 (316.0769, 0.9024)
  point P7 (314.9885, 1.1568)
  point P8 (313.7582, 1.443)
  point P9 (312.3866, 1.7598)
  point P10 (310.8752, 2.1063)
  point P11 (309.2258, 2.4819)
  point P12 (307.4393, 2.8854)
  point P13 (305.5178, 3.3153)
  point P14 (303.4628, 3.7707)
  point P15 (301.2764, 4.2501)
  point P16 (298.9607, 4.7526)
  point P17 (296.5175, 5.2764)
  point P18 (293.9492, 5.8203)
  point P19 (291.2585, 6.3828)
  point P20 (288.4478, 6.9627)
  point P21 (285.5195, 7.5582)
  point P22 (282.4766, 8.1678)
  point P23 (279.3218, 8.79)
  point P24 (276.0584, 9.4236)
  point P25 (272.6891, 10.0668)
  point P26 (269.2175, 10.7178)
  point P27 (265.6469, 11.3757)
  point P28 (261.9803, 12.0381)
  point P29 (258.2219, 12.7041)
  point P30 (254.3747, 13.3722)
  point P31 (250.4426, 14.0403)
  point P32 (246.4295, 14.7072)
  point P33 (242.339, 15.3714)
  point P34 (238.1756, 16.0311)
  point P35 (233.9428, 16.6851)
  point P36 (229.6454, 17.3316)
  point P37 (220.8723, 18.5967)
  point P38 (216.4049, 19.2123)
  point P39 (211.8901, 19.8144)
  point P40 (207.332, 20.4015)
  point P41 (202.7347, 20.9724)
  point P42 (198.1034, 21.5256)
  point P43 (193.4423, 22.0596)
  point P44 (188.7563, 22.5726)
  point P45 (184.0499, 23.0637)
  point P46 (179.3279, 23.5314)
  point P47 (174.5948, 23.9745)
  point P48 (169.8554, 24.3909)
  point P49 (165.1148, 24.7803)
  point P50 (160.3775, 25.1406)
  point P51 (155.6479, 25.4709)
  point P52 (150.9316, 25.7703)
  point P53 (146.233, 26.0373)
  point P54 (141.557, 26.2707)
  point P55 (136.882, 26.4681)
  point P56 (132.2209, 26.6211)
  point P57 (127.5964, 26.7282)
  point P58 (123.0133, 26.7888)
  point P59 (118.4761, 26.8026)
  point P60 (113.9902, 26.7693)
  point P61 (109.5601, 26.6886)
  point P62 (105.191, 26.5611)
  point P63 (100.8866, 26.3866)
  point P64 (96.6524, 26.1647)
  point P65 (92.4927, 25.8975)
  point P66 (88.4121, 25.5832)
  point P67 (84.4152, 25.2282)
  point P68 (80.9052, 24.7441)
  point P69 (76.6873, 24.3761)
  point P70 (72.9635, 23.8905)
  point P71 (69.3402, 23.3611)
  point P72 (65.8208, 22.7938)
  point P73 (62.4086, 22.1883)
  point P74 (59.107, 21.5464)
  point P75 (52.8493, 20.1606)
  point P76 (49.7105, 19.4213)
  point P77 (47.0737, 18.6507)
  point P78 (44.3741, 17.8542)
  point P79 (41.8034, 17.0322)
  point P80 (39.3638, 16.1874)
  point P81 (37.0583, 15.3213)
  point P82 (34.8884, 14.4363)
  point P83 (32.8568, 13.534)
  point P84 (30.965, 12.6166)
  point P85 (29.2145, 11.686)
  point P86 (27.6071, 10.7437)
  point P87 (26.1443, 9.7921)
  point P88 (24.8269, 8.8324)
  point P89 (23.6566, 7.8664)
  point P90 (22.6336, 6.8953)
  point P91 (21.7591, 5.9209)
  point P92 (21.0334, 4.9441)
  point P93 (20.4571, 3.9661)
  point P94 (20.0308, 2.9875)
  point P95 (19.7539, 2.0098)
  point P96 (19.6496, 0.0573)
  point P97 (19.8205, -0.9033)
  point P98 (20.1376, -1.8357)
  point P99 (20.6002, -2.7402)
  point P100 (21.208, -3.6159)
  point P101 (21.9598, -4.4628)
  point P102 (22.8544, -5.2806)
  point P103 (23.8909, -6.069)
  point P104 (25.0681, -6.8277)
  point P105 (26.3846, -7.5561)
  point P106 (27.8384, -8.2539)
  point P107 (29.4284, -8.9211)
  point P108 (31.1522, -9.5571)
  point P109 (33.0086, -10.1613)
  point P110 (34.9949, -10.734)
  point P111 (37.1093, -11.2746)
  point P112 (39.3497, -11.7828)
  point P113 (41.7134, -12.2586)
  point P114 (44.198, -12.702)
  point P115 (46.8014, -13.1127)
  point P116 (49.7104, -13.4915)
  point P117 (52.3532, -13.8357)
  point P118 (58.3469, -14.4294)
  point P119 (61.5023, -14.6781)
  point P120 (64.7591, -14.8953)
  point P121 (68.1149, -15.0813)
  point P122 (71.5661, -15.237)
  point P123 (75.1094, -15.3627)
  point P124 (78.7418, -15.4596)
  point P125 (82.46, -15.528)
  point P126 (86.2607, -15.5691)
  point P127 (90.14, -15.5838)
  point P128 (94.0946, -15.5733)
  point P129 (98.1212, -15.5388)
  point P130 (102.2159, -15.4812)
  point P131 (106.3751, -15.4023)
  point P132 (110.5952, -15.303)
  point P133 (114.872, -15.1845)
  point P134 (119.2022, -15.0489)
  point P135 (123.5813, -14.8971)
  point P136 (128.006, -14.7306)
  point P137 (132.4718, -14.5509)
  point P138 (136.9748, -14.3598)
  point P139 (141.5285, -14.1576)
  point P140 (146.1365, -13.9383)
  point P141 (150.7679, -13.7022)
  point P142 (155.4191, -13.4499)
  point P143 (160.0853, -13.1829)
  point P144 (164.7617, -12.9024)
  point P145 (169.4444, -12.6099)
  point P146 (174.1283, -12.306)
  point P147 (178.8092, -11.9925)
  point P148 (183.4823, -11.67)
  point P149 (188.1434, -11.34)
  point P150 (192.7877, -11.0037)
  point P151 (197.4106, -10.6614)
  point P152 (202.0079, -10.3149)
  point P153 (206.5747, -9.9645)
  point P154 (211.1069, -9.6117)
  point P155 (215.5999, -9.2568)
  point P156 (220.0489, -8.9007)
  point P157 (228.7987, -8.1885)
  point P158 (233.0906, -7.8339)
  point P159 (237.3214, -7.4808)
  point P160 (241.4866, -7.1298)
  point P161 (245.5828, -6.7821)
  point P162 (249.6052, -6.4377)
  point P163 (253.5502, -6.0972)
  point P164 (257.4136, -5.7612)
  point P165 (261.1915, -5.4303)
  point P166 (264.88, -5.1051)
  point P167 (268.4758, -4.7856)
  point P168 (271.9747, -4.4724)
  point P169 (275.3734, -4.1661)
  point P170 (278.6686, -3.867)
  point P171 (281.8564, -3.5757)
  point P172 (284.9344, -3.2925)
  point P173 (287.8984, -3.018)
  point P174 (290.7463, -2.7525)
  point P175 (293.4745, -2.4963)
  point P176 (296.0806, -2.2503)
  point P177 (298.5616, -2.0142)
  point P178 (300.9151, -1.7892)
  point P179 (303.1387, -1.575)
  point P180 (305.23, -1.3728)
  point P181 (307.1866, -1.1823)
  point P182 (309.007, -1.0041)
  point P183 (310.6885, -0.8385)
  point P184 (312.2302, -0.6861)
  point P185 (313.6297, -0.5472)
  point P186 (314.8861, -0.4221)
  point P187 (315.9976, -0.3108)
  point P188 (316.9636, -0.2139)
  point P189 (317.7826, -0.1314)
  point P190 (318.4537, -0.0636)
  point P191 (318.9766, -0.0108)
  point P192 (319.3503, 0.027)
  point P193 (319.5743, 0.0498)
  point P194 (28.0055, 1.0054)
  point P195 (108.6496, 18.6359)
  point P196 (108.6496, -9.3641)
  point P197 (195.6498, 0.4359)
  point P198 (195.6498, 8.8359)
  point P199 (108.6496, 4.6359)
  dimension "d2" = 300.0001
  dimension "d18" = 7.5719
  dimension "d19" = 110
  dimension "d22" = 100
  dimension "d23" = 7
  dimension "d24" = 5
  dimension "d25" = 5
  dimension "d30" = 28
  dimension "d31" = 8.4
  dimension "d33" = 14
  dimension "d34" = 2
  dimension "d37" = 23.918
  dimension "d44" = 198
  dimension "d46" = 59.8865
extrude "Extrusion7" add sketch "Sketch2" along normal blind 84.6667 contours A6 S0 L16 L14 L17
sketch "Sketch3" plane through (0, 0, 84.6667) normal (0, 0, 1) x (1, 0, 0)
  circle A0 centre (209.6498, 0.0573) radius 3.7859 projected
  line L0 (205.8638, 0.0573) -> (195.6498, 0.0573) construction
  line L1 (195.6498, 21.8096) -> (195.6498, -10.7925) projected
  line L2 (208.6683, 1.0573) -> (192.8453, 1.0573)
  line L3 (192.8453, 1.0573) -> (192.8453, -0.9427)
  line L4 (192.8453, -0.9427) -> (208.6683, -0.9427)
  line L5 (208.6683, -0.9427) -> (208.6683, 1.0573)
  line L6 (208.6683, 1.0573) -> (192.8453, -0.9427) construction
  line L7 (192.8453, 1.0573) -> (208.6683, -0.9427) construction
  point P0 (0, 0)
  point P1 (200.7568, 0.0573)
  dimension "d49" = 15.823
  dimension "d50" = 2
extrude "Extrusion8" cut sketch "Sketch3" against normal blind 132.875 contours L2 L5 L4 A0 | A0 L4 L1 L2 | L1 L4 L3 L2 picked at (207.7385, -0.055)
properties part number "2414 basic aerofoil" material "Polyurethane Foam"
